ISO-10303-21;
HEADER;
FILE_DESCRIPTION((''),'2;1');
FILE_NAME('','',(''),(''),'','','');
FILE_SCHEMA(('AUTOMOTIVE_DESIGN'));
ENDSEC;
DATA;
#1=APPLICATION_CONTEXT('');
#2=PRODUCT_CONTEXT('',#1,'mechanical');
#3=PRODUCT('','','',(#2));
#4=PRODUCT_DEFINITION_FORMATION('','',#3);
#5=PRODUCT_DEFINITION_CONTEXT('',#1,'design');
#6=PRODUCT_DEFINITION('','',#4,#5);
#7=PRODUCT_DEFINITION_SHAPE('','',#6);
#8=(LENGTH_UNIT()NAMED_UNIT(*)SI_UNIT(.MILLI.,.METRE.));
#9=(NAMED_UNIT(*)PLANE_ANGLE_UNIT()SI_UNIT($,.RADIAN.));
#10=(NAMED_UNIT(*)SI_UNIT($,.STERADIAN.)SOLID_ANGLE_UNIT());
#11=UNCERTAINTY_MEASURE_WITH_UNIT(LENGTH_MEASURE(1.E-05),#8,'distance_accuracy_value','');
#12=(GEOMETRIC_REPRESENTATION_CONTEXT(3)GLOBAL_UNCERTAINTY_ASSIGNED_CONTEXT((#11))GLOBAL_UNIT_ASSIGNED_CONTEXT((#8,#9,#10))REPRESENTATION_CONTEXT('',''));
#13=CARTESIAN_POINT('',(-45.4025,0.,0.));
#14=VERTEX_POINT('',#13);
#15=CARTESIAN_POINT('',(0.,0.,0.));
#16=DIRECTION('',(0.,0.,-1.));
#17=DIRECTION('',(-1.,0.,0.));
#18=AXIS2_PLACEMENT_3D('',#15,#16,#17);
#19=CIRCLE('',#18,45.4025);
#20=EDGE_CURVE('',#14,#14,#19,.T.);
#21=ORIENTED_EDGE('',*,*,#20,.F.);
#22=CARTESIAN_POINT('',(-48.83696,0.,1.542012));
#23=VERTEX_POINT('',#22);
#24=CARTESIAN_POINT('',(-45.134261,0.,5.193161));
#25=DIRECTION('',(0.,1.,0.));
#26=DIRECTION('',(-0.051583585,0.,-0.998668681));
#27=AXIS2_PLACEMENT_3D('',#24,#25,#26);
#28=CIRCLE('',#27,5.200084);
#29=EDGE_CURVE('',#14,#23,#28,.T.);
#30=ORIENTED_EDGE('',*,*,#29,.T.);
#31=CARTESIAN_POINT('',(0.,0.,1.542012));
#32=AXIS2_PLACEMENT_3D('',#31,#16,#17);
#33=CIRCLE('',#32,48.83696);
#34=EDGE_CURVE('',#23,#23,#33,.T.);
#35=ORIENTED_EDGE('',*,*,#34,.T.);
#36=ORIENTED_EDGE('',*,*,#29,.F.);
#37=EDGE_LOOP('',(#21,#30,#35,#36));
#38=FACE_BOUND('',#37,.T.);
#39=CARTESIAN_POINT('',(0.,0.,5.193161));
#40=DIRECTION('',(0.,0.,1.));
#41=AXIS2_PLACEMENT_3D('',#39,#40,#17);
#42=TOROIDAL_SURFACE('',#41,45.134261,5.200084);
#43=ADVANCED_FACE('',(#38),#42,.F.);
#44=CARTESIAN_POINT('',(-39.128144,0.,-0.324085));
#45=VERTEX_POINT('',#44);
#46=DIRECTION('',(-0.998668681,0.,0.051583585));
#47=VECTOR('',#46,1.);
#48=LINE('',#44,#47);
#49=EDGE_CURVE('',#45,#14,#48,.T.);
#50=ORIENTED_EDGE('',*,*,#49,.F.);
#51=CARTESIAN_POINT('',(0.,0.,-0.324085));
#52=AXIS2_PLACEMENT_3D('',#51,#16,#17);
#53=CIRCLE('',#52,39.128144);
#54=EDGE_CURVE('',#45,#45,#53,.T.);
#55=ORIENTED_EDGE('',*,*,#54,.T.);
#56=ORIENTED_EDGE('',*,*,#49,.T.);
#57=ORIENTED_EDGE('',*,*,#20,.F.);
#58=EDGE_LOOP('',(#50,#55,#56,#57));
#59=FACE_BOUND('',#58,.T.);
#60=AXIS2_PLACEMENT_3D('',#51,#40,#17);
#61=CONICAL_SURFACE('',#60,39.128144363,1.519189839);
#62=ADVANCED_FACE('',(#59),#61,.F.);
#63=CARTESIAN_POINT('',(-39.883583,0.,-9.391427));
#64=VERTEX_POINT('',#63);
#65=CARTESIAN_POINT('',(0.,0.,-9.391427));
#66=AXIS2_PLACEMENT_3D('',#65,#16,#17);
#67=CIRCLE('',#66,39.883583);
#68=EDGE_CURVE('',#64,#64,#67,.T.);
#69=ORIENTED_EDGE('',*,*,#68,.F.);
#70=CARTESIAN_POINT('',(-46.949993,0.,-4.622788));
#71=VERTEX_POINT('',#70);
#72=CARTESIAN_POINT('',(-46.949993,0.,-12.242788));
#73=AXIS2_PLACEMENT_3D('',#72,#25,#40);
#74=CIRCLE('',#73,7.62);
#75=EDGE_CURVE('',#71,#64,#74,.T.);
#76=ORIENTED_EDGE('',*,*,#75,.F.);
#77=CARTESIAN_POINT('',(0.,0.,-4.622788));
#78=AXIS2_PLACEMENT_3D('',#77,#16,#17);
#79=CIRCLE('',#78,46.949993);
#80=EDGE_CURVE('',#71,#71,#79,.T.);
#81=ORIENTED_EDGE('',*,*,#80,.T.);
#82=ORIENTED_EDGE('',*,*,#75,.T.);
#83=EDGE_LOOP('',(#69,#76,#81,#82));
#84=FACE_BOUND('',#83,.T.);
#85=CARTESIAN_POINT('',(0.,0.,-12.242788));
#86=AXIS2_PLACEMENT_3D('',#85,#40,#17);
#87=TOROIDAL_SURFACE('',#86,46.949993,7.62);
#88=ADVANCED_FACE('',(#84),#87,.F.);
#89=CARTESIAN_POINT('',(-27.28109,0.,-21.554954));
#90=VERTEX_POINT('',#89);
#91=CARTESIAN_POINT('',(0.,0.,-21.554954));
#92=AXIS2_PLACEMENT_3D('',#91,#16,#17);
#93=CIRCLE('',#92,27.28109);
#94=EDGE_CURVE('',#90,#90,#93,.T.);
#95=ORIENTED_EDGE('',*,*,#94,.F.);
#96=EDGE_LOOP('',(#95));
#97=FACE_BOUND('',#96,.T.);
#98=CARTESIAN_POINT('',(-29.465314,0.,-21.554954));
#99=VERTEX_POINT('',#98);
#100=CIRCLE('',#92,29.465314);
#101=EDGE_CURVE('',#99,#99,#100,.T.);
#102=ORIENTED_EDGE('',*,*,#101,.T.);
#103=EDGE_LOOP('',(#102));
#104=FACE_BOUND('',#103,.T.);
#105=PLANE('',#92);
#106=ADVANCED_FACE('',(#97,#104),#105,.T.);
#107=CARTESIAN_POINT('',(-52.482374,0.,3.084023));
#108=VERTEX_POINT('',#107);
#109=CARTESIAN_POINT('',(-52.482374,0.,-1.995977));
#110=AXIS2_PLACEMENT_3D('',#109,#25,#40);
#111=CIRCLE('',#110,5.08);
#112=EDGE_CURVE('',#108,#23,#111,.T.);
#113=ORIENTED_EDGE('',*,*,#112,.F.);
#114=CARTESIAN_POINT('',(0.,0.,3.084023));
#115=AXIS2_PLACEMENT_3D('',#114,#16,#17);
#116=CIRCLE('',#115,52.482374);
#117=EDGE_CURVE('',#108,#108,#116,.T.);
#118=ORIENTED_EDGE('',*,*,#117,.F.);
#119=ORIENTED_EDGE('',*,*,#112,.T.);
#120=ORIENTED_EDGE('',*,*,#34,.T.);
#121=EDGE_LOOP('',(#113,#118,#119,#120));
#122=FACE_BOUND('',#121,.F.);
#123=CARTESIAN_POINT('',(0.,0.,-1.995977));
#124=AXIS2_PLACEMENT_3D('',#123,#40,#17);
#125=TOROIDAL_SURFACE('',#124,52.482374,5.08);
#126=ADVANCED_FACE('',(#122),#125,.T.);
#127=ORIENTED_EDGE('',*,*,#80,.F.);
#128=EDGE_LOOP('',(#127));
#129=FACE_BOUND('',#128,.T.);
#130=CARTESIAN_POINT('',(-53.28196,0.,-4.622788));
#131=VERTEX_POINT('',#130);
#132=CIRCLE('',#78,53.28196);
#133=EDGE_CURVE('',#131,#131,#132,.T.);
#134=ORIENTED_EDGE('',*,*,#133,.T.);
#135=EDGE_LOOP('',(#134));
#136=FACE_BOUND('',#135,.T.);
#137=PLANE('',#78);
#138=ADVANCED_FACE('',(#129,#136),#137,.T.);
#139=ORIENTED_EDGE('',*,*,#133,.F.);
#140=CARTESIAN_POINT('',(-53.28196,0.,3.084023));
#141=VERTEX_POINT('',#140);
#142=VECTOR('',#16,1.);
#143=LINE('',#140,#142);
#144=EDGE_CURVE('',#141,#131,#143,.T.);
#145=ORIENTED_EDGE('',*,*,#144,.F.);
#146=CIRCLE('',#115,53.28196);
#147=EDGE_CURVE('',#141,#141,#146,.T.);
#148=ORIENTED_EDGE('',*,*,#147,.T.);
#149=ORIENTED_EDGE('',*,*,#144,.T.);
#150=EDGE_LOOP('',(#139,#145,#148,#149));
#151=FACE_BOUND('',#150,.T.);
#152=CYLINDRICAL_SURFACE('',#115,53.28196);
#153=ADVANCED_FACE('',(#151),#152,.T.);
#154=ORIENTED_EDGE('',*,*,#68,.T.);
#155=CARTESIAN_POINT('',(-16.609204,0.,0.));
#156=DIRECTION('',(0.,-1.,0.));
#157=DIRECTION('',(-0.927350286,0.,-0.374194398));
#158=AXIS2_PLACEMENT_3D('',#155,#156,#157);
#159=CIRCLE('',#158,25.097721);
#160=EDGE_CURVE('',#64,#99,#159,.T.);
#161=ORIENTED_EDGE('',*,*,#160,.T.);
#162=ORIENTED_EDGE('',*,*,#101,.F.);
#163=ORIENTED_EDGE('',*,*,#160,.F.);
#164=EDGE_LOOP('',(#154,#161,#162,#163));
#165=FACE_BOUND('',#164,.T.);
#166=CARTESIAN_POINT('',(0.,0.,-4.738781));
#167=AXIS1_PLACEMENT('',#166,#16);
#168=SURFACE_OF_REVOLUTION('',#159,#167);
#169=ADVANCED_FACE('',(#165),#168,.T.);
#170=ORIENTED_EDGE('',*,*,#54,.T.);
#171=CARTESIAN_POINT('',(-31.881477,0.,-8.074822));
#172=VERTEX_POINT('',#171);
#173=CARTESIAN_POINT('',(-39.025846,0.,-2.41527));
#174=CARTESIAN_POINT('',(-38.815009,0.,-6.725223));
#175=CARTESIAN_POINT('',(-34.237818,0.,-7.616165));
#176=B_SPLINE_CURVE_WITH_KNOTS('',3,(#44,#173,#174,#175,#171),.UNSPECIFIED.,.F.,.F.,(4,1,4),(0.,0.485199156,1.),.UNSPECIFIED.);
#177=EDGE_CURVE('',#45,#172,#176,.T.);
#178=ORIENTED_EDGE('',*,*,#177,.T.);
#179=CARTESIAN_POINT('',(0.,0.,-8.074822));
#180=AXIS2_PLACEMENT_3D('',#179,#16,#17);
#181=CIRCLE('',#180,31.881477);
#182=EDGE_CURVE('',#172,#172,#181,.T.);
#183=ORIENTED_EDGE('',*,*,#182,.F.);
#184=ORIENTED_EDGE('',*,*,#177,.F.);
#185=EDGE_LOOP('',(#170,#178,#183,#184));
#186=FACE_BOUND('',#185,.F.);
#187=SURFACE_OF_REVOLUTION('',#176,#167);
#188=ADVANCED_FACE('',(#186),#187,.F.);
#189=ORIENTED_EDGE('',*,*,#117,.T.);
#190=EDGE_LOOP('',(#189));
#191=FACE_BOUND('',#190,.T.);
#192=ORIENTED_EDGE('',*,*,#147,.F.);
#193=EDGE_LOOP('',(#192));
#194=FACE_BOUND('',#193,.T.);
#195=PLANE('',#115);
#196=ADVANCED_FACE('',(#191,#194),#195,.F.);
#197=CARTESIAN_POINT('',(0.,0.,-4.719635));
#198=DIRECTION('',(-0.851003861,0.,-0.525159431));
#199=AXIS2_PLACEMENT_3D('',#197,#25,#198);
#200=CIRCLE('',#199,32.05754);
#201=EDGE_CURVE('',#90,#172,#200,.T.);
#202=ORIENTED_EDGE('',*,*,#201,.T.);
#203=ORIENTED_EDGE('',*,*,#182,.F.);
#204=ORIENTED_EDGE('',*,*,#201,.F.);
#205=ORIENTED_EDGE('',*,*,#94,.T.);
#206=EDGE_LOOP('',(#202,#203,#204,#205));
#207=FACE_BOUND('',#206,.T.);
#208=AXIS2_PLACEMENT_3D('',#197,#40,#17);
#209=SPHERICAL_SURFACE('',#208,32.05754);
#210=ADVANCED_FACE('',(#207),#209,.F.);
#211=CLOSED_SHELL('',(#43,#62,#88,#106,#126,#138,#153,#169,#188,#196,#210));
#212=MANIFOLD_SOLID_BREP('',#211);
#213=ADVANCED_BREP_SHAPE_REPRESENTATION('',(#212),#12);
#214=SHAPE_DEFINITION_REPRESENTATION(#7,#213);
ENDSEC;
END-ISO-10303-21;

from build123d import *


# Not quite as in the source:
# - a fillet or chamfer that OpenCascade refuses, or shapes differently, is made with other operations: its cross-section is extruded or revolved along the edge and cut away or added


with BuildPart() as f1:
    # F0 (on Front) → F1 (revolve)
    with BuildSketch(Plane.XZ):
        with BuildLine():
            Line((-53.2819602912, 0), (-53.2819602912, -4.6227879951))
            Line((-53.2819602912, -4.6227879951), (-46.949992539, -4.6227879951))
            ThreePointArc((-46.949992539, -4.6227879951), (-42.687538621, -5.9264689249), (-39.883583361, -9.3914266835))
            ThreePointArc((-39.883583361, -9.3914266835), (-35.670707548, -16.3265032657), (-29.4653140008, -21.55495435))
            Line((-29.4653140008, -21.55495435), (-27.281089944, -21.55495435))
            ThreePointArc((-27.281089944, -21.55495435), (-30.3394267637, -15.0736211015), (-31.8814767831, -8.0748221676))
            add(Edge.make_bspline(
                [(-39.1281443631, -0.3240852156), (-39.0258462115, -2.415270443), (-38.815008764, -6.7252227611), (-34.2378182979, -7.6161645716), (-31.8814767831, -8.0748221676)],
                knots=[0, 0, 0, 0, 0.4851991561, 1, 1, 1, 1], degree=3))
            Line((-39.1281443631, -0.3240852156), (-45.4025, 0))
            ThreePointArc((-45.4025, 0), (-47.264175973, 0.4492875303), (-48.8369602912, 1.5420117415))
            Line((-48.8369602912, 1.5420117415), (-48.8369602912, 3.0840234831))
            Line((-48.8369602912, 3.0840234831), (-53.2819602912, 3.0840234831))
            Line((-53.2819602912, 3.0840234831), (-53.2819602912, 0))
        make_face()
    revolve(axis=Axis((0, 0, -4.7387806699), (0, 0, -1)))

    # F2: fillet of radius 5.08 on 1 edges, made by hand

    # F2_s1 → F2_t2 (revolve, cut)
    with BuildSketch(Plane.XZ):
        with BuildLine():
            ThreePointArc((-52.4823737223, 3.0840234831), (-50.5033058044, 2.6826653989), (-48.8369602912, 1.5420117415))
            Line((-48.8369602912, 1.5420117415), (-48.7640520226, 1.6127715067))
            ThreePointArc((-48.7640520226, 1.6127715067), (-48.7353602912, 2.3130176123), (-48.7353602912, 3.0840234831))
            Line((-48.7353602912, 3.0840234831), (-48.8369602912, 3.1856234831))
            Line((-48.8369602912, 3.1856234831), (-52.4823737223, 3.1856234831))
            Line((-52.4823737223, 3.1856234831), (-52.4823737223, 3.0840234831))
        make_face()
    revolve(axis=Axis((0, 0, 3.0840234831), (0, 0, -1)), mode=Mode.SUBTRACT)


solid = f1.part
